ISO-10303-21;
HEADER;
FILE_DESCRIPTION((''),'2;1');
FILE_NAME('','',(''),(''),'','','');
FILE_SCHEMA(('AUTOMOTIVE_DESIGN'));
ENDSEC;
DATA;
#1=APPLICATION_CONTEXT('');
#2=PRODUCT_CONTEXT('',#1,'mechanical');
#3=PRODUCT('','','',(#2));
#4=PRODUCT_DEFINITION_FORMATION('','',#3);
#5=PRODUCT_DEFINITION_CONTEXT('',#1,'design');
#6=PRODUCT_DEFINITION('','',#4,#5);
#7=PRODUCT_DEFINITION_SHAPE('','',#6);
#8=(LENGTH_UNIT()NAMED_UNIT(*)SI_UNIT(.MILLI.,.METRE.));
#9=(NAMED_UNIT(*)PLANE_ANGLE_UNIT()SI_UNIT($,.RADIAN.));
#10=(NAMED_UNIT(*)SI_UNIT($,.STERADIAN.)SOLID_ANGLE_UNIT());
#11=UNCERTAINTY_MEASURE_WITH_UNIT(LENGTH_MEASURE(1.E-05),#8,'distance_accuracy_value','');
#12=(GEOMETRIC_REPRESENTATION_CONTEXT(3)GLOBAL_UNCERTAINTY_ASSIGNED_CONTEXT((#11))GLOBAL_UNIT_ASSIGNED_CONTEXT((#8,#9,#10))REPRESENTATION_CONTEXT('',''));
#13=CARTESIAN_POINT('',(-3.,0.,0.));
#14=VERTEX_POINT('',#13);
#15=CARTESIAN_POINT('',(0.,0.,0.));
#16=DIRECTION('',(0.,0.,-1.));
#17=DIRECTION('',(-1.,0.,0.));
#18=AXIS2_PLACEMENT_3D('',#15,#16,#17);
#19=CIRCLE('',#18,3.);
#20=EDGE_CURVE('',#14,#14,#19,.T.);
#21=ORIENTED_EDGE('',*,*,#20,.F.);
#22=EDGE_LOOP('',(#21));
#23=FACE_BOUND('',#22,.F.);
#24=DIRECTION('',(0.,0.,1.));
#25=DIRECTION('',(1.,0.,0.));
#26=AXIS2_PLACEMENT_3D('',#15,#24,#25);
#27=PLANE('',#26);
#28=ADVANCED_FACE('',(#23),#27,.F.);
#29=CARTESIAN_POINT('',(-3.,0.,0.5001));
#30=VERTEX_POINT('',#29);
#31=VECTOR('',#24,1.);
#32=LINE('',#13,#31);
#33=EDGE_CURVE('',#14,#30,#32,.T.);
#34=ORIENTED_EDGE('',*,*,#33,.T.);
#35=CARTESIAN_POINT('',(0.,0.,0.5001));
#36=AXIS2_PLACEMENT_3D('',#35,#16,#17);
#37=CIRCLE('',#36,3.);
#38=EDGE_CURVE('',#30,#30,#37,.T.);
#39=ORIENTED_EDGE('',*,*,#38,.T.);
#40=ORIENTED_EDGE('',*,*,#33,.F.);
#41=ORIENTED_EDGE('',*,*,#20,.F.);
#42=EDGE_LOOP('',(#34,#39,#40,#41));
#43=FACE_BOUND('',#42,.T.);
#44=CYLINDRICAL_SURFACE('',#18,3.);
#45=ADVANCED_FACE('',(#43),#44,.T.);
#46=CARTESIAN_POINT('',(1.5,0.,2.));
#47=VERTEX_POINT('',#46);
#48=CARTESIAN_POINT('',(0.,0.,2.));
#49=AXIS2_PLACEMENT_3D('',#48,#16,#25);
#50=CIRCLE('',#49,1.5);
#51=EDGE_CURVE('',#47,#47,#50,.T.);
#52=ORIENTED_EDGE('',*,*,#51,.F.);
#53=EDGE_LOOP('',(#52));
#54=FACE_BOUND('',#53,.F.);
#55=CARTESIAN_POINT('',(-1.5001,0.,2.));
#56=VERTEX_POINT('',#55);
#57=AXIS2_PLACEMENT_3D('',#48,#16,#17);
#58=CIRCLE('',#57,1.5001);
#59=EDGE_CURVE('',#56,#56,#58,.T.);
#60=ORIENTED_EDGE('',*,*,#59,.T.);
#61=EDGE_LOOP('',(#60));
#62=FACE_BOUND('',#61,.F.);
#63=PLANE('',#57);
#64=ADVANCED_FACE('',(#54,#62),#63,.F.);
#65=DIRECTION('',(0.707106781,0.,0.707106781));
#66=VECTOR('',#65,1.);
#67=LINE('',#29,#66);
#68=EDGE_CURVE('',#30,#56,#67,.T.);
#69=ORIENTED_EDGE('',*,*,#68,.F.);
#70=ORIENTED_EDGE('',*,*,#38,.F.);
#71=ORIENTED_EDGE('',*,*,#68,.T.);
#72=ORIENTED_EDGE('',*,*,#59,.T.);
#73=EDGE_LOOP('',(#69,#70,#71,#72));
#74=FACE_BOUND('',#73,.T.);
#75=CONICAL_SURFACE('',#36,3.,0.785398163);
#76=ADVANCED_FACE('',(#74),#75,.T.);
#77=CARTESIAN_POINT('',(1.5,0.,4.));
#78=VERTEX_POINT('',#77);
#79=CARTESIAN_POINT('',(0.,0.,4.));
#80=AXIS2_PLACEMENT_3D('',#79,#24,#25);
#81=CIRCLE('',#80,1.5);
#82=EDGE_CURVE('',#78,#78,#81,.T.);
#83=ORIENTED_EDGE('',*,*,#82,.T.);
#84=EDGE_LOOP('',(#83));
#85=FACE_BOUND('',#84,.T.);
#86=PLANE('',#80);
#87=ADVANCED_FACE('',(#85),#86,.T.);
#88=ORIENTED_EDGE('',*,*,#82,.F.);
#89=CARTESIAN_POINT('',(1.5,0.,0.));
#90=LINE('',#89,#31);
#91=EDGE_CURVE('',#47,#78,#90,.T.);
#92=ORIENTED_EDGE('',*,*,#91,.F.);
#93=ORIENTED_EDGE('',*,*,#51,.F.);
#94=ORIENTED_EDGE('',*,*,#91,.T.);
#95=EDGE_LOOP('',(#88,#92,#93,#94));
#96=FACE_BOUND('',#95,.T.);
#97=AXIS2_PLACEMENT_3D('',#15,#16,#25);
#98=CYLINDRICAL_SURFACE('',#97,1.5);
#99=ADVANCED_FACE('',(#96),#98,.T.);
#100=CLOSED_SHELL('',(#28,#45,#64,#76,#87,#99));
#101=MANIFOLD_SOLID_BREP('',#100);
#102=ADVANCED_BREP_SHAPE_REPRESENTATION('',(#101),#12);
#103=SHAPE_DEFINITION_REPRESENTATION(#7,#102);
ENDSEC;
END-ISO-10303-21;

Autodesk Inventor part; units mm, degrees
ref_plane "YZ Plane" through (0, 0, 0) normal (1, 0, 0) x (0, 1, 0)
ref_plane "XZ Plane" through (0, 0, 0) normal (0, 1, 0) x (-1, 0, 0)
ref_plane "XY Plane" through (0, 0, 0) normal (0, 0, 1) x (1, 0, 0)
sketch "スケッチ1" plane through (0, 0, 0) normal (0, 0, 1) x (1, 0, 0)
  circle A0 centre (0, 0) radius 1.5
  dimension "d0" = 3
extrude "押し出し1" add sketch "スケッチ1" along normal blind 4
sketch "スケッチ2" plane through (0, 0, 0) normal (0, 0, -1) x (-1, 0, 0)
  circle A0 centre (0, 0) radius 3
  dimension "d3" = 6
extrude "押し出し2" add sketch "スケッチ2" against normal blind 2
thread "ねじ1" size "M3x0.5" class "6g" standard "ANSI Metric M Profile" full length
chamfer "面取り1" distance 1.5 angle 45 1 edges at (3, 0, 2)
properties part number "ネジ皿m3,04" material "鋼、高強度、低合金"
